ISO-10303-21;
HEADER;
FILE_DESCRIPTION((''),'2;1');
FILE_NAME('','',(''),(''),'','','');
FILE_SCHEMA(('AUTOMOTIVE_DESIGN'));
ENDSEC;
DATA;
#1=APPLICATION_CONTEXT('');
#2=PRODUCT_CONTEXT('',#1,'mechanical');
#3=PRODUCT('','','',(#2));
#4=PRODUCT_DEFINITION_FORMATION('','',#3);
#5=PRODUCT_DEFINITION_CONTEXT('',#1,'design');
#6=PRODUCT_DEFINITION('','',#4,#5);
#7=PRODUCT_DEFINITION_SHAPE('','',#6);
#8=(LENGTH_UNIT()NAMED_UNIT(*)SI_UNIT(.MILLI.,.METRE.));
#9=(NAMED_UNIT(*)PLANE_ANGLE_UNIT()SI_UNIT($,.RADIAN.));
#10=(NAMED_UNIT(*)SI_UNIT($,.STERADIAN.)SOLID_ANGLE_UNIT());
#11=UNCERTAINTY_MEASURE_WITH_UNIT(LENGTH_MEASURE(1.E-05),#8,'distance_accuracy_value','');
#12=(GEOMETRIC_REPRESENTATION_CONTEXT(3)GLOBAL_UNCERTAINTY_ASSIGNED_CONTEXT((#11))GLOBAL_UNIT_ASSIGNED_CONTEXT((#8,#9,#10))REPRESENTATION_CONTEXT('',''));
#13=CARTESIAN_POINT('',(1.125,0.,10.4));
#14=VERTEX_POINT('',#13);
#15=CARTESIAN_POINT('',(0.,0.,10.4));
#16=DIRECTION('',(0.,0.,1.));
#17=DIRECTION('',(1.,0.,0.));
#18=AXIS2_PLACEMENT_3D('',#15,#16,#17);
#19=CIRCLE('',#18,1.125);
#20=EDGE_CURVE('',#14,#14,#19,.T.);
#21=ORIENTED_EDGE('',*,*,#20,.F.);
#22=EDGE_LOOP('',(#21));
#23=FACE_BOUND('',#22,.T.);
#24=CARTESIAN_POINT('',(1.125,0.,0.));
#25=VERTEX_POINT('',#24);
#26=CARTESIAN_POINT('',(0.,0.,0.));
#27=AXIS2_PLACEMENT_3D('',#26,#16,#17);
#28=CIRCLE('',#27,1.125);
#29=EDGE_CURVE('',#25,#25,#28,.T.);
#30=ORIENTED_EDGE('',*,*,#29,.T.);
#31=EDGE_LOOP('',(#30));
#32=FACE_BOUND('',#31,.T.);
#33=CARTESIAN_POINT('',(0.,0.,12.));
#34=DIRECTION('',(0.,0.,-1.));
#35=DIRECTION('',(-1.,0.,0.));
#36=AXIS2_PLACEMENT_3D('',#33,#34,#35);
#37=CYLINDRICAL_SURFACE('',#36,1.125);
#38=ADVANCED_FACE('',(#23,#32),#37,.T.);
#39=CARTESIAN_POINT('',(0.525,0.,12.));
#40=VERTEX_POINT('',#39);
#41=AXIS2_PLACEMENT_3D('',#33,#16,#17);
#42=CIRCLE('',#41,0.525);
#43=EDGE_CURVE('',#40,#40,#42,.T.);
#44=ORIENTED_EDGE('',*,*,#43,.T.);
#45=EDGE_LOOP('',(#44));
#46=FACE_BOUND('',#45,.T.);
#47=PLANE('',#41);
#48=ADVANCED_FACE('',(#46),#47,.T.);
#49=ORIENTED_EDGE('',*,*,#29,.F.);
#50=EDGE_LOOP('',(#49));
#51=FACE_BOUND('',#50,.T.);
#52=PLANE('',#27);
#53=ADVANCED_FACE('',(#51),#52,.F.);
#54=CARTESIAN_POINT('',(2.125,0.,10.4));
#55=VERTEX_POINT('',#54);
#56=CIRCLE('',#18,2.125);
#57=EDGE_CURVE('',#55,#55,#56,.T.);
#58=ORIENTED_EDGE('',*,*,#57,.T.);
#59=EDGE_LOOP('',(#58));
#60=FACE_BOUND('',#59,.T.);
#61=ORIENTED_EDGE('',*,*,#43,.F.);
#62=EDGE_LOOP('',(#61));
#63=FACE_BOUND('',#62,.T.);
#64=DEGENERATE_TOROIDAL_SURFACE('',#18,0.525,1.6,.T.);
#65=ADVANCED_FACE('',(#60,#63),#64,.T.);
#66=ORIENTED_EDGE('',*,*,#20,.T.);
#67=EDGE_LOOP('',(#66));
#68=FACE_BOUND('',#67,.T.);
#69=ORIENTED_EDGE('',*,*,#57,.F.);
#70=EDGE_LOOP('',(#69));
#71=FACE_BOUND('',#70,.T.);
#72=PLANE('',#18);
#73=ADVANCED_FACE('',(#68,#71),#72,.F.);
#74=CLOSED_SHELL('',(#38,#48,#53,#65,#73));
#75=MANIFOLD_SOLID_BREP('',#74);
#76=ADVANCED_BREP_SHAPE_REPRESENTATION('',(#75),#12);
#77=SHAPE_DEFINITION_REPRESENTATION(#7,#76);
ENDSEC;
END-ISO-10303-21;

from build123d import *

# Parameters (mm, degrees)
ESBO_O1_R                = 1.125
RESSALTO_EXTRUS_O1_DEPTH = 12
ESBO_O2_R                = 2.125
RESSALTO_EXTRUS_O2_DEPTH = 1.6
FILETE1_R                = 1.6


with BuildPart() as part:
    # Esboço1 → Ressalto-extrusão1 (new body)
    with BuildSketch(Plane.XY):
        Circle(ESBO_O1_R)
    extrude(amount=RESSALTO_EXTRUS_O1_DEPTH)

    # Esboço2 → Ressalto-extrusão2 (add)
    with BuildSketch(Plane.XY.offset(12)):
        Circle(ESBO_O2_R)
    extrude(amount=-RESSALTO_EXTRUS_O2_DEPTH)

    # Filete1
    filete1_edges = [part.edges().sort_by_distance(p)[0] for p in [
        (-2.125, 0, 12),
    ]]
    fillet(filete1_edges, radius=FILETE1_R - 0.0001)  # a hair under: the kernel refuses the full size


solid = part.part
